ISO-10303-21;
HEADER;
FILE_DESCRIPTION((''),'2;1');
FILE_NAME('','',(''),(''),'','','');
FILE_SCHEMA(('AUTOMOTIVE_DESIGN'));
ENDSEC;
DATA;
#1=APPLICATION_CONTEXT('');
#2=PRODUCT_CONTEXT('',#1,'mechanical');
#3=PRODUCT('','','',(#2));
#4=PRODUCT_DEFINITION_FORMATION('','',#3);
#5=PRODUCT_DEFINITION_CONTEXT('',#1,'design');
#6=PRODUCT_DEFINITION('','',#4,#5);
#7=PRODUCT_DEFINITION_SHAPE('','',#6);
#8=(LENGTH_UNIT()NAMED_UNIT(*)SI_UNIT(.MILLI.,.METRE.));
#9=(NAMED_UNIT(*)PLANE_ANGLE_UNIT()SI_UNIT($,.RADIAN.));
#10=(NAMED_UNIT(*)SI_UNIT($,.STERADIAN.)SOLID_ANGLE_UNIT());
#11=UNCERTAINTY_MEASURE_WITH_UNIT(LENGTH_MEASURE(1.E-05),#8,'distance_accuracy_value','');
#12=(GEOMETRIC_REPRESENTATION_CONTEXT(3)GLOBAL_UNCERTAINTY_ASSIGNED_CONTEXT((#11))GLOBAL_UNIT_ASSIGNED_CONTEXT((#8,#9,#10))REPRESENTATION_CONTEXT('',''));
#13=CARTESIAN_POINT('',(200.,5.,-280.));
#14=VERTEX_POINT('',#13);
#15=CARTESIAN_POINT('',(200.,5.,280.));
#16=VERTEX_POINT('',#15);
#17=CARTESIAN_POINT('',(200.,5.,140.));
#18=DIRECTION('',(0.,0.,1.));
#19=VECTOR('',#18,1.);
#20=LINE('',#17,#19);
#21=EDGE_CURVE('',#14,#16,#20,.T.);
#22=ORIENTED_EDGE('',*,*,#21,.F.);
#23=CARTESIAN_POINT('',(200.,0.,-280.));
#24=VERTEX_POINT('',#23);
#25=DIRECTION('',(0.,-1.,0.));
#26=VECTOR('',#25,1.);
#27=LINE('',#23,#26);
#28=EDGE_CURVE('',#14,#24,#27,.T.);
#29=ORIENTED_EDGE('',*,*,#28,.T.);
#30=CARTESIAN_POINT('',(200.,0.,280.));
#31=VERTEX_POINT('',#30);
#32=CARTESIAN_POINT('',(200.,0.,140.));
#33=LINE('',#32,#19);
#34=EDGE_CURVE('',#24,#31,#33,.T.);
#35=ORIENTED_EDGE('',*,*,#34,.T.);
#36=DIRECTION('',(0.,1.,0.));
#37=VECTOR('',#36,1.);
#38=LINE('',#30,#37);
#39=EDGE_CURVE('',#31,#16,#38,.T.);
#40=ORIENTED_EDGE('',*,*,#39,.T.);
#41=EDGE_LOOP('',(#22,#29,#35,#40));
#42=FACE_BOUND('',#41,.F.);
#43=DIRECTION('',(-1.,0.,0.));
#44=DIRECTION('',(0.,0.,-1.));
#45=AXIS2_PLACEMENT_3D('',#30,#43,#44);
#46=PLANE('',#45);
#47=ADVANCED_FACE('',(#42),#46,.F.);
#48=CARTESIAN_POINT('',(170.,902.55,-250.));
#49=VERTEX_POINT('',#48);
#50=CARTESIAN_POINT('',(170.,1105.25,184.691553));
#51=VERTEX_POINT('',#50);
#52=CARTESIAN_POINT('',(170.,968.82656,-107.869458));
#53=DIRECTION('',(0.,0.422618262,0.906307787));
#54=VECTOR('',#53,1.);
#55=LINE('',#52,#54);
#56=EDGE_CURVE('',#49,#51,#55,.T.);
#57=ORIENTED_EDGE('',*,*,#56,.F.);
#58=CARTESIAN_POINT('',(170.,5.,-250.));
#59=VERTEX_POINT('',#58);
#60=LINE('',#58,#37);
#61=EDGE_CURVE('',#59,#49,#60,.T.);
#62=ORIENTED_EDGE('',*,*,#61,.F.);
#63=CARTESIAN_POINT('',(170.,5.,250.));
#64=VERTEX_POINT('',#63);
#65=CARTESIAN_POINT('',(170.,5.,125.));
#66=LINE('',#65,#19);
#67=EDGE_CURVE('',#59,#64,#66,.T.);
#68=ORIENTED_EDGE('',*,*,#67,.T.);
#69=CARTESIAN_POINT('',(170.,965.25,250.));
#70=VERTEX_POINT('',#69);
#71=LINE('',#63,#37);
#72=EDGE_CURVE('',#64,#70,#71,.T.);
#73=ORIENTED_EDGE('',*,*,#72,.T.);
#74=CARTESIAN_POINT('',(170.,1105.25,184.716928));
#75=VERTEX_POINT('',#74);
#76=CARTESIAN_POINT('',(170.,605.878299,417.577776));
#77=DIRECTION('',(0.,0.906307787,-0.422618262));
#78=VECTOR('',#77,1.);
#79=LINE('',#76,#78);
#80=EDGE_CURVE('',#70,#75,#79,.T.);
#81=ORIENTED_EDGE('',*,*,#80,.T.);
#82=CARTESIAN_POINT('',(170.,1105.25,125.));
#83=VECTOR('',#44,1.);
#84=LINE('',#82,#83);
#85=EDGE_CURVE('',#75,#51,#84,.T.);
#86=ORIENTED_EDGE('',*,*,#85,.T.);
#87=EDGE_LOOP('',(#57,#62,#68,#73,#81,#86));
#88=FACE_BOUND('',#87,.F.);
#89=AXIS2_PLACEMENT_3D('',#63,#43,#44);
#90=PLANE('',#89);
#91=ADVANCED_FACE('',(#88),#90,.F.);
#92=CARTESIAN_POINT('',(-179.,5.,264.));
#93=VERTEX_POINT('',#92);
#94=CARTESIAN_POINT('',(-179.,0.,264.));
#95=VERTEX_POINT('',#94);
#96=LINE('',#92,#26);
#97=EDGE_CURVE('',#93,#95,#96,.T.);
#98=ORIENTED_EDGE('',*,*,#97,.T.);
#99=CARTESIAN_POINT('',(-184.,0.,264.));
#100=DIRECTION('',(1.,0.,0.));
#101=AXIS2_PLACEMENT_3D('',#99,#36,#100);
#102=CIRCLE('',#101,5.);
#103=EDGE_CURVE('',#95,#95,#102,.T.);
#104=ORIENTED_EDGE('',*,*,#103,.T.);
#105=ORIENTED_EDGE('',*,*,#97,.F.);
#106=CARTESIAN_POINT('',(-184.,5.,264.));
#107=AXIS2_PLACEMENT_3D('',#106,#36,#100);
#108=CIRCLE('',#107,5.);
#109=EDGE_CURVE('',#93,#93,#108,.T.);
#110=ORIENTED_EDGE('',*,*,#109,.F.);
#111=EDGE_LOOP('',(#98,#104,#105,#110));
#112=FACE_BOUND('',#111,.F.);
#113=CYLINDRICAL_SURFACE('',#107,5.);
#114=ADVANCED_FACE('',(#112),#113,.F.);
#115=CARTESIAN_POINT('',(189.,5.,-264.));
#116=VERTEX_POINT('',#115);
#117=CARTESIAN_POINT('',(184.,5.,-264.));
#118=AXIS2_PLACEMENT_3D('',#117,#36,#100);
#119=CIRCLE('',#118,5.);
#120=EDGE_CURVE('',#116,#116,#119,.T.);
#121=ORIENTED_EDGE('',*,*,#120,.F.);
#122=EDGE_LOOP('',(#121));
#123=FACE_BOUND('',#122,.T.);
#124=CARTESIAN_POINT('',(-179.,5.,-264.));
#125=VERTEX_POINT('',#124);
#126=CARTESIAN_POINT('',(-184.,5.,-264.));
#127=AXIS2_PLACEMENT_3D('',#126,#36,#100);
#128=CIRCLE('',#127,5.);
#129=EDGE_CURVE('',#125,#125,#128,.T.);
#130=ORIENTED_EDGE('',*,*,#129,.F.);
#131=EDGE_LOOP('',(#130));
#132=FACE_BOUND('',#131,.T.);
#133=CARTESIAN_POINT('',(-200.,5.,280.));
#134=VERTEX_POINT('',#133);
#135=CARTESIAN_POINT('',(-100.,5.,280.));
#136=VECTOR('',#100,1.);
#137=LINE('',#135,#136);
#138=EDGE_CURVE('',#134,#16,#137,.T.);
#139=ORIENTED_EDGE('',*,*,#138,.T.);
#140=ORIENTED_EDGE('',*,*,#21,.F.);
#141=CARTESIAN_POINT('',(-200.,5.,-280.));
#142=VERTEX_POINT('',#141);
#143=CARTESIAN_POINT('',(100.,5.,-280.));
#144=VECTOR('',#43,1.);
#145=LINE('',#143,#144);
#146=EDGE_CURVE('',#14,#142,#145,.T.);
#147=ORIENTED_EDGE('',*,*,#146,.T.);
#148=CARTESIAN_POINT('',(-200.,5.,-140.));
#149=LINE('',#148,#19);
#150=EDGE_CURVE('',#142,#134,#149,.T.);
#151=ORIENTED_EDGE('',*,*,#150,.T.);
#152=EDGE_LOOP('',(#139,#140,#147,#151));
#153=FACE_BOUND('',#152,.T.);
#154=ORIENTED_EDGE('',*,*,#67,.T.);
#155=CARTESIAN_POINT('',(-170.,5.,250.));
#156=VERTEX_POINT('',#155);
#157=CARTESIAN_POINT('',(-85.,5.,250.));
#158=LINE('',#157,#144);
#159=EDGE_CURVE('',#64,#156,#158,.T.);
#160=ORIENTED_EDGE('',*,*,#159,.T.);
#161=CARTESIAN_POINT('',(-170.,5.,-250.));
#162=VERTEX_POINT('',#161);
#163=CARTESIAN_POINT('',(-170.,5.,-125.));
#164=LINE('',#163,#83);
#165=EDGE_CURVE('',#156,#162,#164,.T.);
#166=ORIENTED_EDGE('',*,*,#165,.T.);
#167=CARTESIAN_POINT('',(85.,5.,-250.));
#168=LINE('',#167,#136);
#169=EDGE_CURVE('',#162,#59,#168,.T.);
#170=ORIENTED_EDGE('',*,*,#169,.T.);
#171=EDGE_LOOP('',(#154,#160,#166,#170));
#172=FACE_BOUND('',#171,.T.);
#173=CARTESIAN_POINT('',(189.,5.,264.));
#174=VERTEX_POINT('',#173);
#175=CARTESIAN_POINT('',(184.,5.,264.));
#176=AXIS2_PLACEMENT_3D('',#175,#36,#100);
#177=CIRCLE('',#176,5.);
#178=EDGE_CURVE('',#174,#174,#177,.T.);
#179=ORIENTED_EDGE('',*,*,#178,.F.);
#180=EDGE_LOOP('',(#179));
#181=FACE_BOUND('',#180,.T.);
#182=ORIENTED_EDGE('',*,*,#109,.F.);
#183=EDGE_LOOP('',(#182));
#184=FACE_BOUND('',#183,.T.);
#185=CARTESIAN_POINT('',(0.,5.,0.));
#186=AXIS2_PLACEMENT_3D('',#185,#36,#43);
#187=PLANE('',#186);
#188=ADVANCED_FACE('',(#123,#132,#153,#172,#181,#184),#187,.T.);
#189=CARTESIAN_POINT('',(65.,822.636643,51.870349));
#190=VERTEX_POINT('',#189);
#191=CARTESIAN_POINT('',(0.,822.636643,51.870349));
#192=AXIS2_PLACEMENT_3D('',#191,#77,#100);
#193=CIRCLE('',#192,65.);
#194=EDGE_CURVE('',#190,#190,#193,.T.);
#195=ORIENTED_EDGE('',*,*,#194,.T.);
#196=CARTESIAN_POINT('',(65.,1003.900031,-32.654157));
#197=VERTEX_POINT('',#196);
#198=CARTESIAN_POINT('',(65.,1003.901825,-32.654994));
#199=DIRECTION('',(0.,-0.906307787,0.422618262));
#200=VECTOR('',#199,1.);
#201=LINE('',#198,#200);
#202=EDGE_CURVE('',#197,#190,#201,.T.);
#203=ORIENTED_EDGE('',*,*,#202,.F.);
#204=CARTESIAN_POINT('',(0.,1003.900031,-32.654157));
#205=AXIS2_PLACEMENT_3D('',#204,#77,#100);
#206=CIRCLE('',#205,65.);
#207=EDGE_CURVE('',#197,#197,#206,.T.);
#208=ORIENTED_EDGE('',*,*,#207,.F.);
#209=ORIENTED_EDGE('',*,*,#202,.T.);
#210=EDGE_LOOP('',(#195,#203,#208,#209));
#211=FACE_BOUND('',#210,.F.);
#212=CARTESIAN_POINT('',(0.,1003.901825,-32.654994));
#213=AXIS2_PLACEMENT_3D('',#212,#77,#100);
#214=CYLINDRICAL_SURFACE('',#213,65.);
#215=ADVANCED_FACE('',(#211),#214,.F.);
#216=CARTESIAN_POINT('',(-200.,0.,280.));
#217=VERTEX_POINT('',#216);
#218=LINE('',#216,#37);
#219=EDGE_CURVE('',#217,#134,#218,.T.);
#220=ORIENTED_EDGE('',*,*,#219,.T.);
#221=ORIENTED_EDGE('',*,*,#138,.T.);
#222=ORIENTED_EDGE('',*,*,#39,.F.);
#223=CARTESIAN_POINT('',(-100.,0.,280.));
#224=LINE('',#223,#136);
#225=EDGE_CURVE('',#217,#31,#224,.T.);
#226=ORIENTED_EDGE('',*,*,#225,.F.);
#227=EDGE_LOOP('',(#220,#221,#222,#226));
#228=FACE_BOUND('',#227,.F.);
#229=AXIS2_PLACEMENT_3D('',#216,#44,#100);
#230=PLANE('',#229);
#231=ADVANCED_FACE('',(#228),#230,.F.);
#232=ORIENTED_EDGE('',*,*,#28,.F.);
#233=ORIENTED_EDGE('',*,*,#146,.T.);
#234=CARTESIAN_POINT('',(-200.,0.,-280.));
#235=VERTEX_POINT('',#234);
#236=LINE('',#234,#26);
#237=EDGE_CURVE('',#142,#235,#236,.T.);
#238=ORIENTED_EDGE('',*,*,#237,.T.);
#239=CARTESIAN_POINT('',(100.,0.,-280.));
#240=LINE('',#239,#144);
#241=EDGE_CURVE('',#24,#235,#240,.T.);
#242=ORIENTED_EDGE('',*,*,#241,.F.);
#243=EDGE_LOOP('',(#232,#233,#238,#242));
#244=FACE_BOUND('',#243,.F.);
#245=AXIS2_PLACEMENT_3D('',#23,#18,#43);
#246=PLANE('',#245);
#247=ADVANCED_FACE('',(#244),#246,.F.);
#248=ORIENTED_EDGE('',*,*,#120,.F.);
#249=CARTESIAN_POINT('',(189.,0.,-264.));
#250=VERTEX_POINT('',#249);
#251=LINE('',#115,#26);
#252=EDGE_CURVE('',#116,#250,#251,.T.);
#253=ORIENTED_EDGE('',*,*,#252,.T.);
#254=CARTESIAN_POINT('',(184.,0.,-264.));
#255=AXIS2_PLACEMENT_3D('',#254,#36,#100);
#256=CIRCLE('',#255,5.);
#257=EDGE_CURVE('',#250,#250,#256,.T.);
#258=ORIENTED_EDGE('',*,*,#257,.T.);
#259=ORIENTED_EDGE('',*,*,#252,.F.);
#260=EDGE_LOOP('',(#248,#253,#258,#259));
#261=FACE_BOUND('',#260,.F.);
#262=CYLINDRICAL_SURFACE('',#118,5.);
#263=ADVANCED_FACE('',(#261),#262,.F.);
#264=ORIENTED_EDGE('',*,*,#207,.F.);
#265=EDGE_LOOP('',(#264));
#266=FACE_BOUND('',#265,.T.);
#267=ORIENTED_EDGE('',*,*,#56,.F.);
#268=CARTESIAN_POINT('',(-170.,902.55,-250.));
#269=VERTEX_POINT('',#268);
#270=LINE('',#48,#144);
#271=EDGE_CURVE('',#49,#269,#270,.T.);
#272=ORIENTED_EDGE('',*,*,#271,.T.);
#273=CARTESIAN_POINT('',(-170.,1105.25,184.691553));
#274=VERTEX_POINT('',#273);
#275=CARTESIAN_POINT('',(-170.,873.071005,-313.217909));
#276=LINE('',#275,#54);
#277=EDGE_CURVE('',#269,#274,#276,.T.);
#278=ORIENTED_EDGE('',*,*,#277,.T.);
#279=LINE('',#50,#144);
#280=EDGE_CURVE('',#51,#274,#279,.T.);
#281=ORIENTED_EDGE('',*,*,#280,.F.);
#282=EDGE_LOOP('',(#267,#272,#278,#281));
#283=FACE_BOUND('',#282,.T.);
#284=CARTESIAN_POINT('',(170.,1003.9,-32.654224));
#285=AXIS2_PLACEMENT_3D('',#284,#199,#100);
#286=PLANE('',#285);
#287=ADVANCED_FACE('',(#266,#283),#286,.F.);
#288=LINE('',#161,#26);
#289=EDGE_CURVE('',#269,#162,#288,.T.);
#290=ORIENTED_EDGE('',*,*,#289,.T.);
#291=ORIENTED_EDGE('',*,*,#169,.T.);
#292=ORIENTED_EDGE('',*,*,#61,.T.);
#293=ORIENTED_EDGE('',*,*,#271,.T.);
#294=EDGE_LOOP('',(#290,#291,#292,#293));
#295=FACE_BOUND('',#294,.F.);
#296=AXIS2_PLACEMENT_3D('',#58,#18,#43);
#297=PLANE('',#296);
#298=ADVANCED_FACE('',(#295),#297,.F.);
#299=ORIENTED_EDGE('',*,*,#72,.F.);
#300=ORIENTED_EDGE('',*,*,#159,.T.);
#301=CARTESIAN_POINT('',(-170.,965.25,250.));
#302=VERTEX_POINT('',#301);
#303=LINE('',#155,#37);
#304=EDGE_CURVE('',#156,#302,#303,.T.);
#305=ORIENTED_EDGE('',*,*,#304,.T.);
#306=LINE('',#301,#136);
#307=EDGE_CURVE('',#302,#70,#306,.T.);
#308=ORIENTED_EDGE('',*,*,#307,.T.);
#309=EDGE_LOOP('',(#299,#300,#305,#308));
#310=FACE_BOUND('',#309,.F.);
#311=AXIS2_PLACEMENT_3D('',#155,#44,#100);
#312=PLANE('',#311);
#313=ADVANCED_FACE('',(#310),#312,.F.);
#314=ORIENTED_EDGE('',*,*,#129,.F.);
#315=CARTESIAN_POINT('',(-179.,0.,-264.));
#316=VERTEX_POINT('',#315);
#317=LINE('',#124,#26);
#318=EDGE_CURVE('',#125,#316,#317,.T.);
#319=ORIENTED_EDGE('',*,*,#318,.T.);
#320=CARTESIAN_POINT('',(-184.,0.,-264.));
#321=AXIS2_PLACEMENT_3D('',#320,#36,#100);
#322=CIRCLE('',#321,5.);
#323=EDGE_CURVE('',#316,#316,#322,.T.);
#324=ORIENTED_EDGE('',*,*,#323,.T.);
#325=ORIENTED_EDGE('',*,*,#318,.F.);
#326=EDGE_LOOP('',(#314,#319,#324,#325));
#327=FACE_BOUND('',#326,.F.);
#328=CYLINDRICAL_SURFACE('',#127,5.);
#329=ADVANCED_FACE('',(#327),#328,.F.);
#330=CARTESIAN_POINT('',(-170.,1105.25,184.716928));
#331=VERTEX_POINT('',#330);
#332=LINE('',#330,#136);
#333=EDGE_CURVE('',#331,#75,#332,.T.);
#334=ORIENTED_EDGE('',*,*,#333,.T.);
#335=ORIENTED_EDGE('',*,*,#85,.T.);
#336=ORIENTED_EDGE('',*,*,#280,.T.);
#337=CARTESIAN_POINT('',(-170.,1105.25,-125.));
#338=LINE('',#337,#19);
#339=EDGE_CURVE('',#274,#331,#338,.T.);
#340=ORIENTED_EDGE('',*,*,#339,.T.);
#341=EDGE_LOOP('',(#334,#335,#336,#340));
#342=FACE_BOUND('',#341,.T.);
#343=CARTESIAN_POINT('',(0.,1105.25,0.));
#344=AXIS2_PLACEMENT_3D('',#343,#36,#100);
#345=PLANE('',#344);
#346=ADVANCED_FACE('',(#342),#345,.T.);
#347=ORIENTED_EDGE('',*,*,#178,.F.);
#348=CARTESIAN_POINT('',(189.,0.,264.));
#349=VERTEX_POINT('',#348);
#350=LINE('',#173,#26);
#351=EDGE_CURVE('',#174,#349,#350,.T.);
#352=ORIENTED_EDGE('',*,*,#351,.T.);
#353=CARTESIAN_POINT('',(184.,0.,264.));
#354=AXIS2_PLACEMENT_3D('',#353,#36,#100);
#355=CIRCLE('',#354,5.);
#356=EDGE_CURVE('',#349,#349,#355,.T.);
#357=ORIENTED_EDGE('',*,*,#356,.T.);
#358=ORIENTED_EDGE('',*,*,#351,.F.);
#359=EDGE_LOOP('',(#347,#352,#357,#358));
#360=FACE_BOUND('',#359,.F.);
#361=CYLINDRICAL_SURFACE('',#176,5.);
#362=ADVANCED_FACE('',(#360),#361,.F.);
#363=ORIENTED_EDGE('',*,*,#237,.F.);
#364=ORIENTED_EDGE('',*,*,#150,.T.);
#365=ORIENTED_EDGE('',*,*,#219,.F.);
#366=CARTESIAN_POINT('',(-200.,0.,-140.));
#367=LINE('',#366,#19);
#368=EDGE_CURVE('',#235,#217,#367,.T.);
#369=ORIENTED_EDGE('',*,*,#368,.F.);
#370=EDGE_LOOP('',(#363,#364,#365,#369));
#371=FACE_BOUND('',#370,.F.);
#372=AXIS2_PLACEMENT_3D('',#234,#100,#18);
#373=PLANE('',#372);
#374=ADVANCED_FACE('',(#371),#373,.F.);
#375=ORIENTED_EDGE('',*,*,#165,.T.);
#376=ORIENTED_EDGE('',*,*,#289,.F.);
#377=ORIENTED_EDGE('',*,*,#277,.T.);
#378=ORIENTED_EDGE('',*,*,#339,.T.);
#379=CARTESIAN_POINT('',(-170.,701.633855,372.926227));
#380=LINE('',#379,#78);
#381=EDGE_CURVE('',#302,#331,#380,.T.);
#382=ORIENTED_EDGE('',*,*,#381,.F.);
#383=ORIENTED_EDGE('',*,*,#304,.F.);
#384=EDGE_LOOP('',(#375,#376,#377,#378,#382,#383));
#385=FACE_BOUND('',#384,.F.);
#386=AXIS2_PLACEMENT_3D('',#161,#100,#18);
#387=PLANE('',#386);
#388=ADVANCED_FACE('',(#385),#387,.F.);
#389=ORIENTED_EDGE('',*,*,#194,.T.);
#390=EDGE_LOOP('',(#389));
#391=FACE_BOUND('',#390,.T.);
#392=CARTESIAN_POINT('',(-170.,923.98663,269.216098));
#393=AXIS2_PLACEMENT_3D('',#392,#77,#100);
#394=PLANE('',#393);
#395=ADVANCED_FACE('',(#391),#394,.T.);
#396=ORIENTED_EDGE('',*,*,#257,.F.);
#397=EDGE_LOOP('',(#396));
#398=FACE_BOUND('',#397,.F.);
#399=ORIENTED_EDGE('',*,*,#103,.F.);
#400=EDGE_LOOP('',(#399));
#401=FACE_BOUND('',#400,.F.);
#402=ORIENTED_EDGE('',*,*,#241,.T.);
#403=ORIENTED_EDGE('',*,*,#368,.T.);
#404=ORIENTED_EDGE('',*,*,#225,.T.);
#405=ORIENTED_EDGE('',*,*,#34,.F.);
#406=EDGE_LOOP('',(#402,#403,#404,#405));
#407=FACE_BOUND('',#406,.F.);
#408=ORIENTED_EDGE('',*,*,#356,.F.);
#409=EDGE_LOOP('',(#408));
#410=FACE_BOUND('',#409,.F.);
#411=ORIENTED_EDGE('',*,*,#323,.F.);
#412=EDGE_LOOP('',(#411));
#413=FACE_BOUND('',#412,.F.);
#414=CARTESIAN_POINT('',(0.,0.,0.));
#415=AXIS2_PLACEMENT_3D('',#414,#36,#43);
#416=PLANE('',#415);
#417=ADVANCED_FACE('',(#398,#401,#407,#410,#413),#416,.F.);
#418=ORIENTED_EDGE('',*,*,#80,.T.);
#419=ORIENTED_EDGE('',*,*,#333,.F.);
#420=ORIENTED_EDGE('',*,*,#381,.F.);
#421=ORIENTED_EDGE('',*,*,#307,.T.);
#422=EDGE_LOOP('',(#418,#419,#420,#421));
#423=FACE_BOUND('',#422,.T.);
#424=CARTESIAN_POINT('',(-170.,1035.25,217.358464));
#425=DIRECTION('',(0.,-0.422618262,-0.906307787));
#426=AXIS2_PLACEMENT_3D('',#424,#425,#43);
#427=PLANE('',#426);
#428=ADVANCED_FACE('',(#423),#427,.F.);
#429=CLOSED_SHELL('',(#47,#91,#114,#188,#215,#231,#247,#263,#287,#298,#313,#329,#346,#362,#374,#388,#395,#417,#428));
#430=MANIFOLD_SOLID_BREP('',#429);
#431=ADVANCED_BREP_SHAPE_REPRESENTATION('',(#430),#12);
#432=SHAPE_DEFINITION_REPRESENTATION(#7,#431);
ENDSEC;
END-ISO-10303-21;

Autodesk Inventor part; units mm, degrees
ref_plane "YZ Plane" through (0, 0, 0) normal (1, 0, 0) x (0, 1, 0)
ref_plane "XZ Plane" through (0, 0, 0) normal (0, 1, 0) x (-1, 0, 0)
ref_plane "XY Plane" through (0, 0, 0) normal (0, 0, 1) x (1, 0, 0)
sketch "Sketch1" plane through (0, 0, 0) normal (0, 1, 0) x (-1, 0, 0)
  line L0 (200, 280) -> (-200, 280)
  line L1 (-200, 280) -> (-200, -280)
  line L2 (-200, -280) -> (200, -280)
  line L3 (200, -280) -> (200, 280)
  line L4 (200, 280) -> (-200, -280) construction
  line L5 (-200, 280) -> (200, -280) construction
  point P0 (0, 0)
extrude "Base" add sketch "Sketch1" along normal blind 5
sketch "Sketch3" plane through (0, 5, 0) normal (0, 1, 0) x (1, 0, 0)
  line L0 (-170, -250) -> (170, -250)
  line L1 (170, -250) -> (170, 250)
  line L2 (170, 250) -> (-170, 250)
  line L3 (-170, 250) -> (-170, -250)
  line L4 (-170, -250) -> (170, 250) construction
  line L5 (170, -250) -> (-170, 250) construction
  point P0 (0, 0)
extrude "Stand" add sketch "Sketch3" along normal blind 900
move faces "Move2" translate (0, 200.25, 0) faces at (56.6667, 905, 83.3333)
chamfer "FrontChamfer" distance 140 angle 25 1 edges at (0, 1105.25, 250) measured on face at (-56.6667, 371.75, 250)
chamfer "BeamHoleFace" distance 202.7 angle 65 1 edges at (0, 1105.25, -250) measured on face at (56.6667, 371.75, -250)
sketch "Sketch5" plane through (-170, 1105.25, 184.6916) normal (0, 0.9063078, -0.4226183) x (1, 0, 0)
  circle A0 centre (170, 239.8145) radius 65
  point P0 (170, 634.4862)
  point P1 (170, 240)
  point P2 (170, 240)
  point P3 (203, 347)
  point P4 (170, 240)
extrude "BeamHole" cut sketch "Sketch5" against normal blind 200
sketch "Sketch6" plane through (0, 5, 0) normal (0, 1, 0) x (1, 0, 0)
  circle A0 centre (-184, -264) radius 5
  circle A1 centre (184, -264) radius 5
  line L0 (200, -280) -> (200, 280) construction
  line L1 (200, 0) -> (-200, 0) construction
  line L2 (-200, 280) -> (-200, -280) construction
  circle A2 centre (-184, 264) radius 5
  circle A3 centre (184, 264) radius 5
  point P0 (0, 0)
extrude "BaseBoltHoles" cut sketch "Sketch6" against normal up to next
properties part number "Base"
